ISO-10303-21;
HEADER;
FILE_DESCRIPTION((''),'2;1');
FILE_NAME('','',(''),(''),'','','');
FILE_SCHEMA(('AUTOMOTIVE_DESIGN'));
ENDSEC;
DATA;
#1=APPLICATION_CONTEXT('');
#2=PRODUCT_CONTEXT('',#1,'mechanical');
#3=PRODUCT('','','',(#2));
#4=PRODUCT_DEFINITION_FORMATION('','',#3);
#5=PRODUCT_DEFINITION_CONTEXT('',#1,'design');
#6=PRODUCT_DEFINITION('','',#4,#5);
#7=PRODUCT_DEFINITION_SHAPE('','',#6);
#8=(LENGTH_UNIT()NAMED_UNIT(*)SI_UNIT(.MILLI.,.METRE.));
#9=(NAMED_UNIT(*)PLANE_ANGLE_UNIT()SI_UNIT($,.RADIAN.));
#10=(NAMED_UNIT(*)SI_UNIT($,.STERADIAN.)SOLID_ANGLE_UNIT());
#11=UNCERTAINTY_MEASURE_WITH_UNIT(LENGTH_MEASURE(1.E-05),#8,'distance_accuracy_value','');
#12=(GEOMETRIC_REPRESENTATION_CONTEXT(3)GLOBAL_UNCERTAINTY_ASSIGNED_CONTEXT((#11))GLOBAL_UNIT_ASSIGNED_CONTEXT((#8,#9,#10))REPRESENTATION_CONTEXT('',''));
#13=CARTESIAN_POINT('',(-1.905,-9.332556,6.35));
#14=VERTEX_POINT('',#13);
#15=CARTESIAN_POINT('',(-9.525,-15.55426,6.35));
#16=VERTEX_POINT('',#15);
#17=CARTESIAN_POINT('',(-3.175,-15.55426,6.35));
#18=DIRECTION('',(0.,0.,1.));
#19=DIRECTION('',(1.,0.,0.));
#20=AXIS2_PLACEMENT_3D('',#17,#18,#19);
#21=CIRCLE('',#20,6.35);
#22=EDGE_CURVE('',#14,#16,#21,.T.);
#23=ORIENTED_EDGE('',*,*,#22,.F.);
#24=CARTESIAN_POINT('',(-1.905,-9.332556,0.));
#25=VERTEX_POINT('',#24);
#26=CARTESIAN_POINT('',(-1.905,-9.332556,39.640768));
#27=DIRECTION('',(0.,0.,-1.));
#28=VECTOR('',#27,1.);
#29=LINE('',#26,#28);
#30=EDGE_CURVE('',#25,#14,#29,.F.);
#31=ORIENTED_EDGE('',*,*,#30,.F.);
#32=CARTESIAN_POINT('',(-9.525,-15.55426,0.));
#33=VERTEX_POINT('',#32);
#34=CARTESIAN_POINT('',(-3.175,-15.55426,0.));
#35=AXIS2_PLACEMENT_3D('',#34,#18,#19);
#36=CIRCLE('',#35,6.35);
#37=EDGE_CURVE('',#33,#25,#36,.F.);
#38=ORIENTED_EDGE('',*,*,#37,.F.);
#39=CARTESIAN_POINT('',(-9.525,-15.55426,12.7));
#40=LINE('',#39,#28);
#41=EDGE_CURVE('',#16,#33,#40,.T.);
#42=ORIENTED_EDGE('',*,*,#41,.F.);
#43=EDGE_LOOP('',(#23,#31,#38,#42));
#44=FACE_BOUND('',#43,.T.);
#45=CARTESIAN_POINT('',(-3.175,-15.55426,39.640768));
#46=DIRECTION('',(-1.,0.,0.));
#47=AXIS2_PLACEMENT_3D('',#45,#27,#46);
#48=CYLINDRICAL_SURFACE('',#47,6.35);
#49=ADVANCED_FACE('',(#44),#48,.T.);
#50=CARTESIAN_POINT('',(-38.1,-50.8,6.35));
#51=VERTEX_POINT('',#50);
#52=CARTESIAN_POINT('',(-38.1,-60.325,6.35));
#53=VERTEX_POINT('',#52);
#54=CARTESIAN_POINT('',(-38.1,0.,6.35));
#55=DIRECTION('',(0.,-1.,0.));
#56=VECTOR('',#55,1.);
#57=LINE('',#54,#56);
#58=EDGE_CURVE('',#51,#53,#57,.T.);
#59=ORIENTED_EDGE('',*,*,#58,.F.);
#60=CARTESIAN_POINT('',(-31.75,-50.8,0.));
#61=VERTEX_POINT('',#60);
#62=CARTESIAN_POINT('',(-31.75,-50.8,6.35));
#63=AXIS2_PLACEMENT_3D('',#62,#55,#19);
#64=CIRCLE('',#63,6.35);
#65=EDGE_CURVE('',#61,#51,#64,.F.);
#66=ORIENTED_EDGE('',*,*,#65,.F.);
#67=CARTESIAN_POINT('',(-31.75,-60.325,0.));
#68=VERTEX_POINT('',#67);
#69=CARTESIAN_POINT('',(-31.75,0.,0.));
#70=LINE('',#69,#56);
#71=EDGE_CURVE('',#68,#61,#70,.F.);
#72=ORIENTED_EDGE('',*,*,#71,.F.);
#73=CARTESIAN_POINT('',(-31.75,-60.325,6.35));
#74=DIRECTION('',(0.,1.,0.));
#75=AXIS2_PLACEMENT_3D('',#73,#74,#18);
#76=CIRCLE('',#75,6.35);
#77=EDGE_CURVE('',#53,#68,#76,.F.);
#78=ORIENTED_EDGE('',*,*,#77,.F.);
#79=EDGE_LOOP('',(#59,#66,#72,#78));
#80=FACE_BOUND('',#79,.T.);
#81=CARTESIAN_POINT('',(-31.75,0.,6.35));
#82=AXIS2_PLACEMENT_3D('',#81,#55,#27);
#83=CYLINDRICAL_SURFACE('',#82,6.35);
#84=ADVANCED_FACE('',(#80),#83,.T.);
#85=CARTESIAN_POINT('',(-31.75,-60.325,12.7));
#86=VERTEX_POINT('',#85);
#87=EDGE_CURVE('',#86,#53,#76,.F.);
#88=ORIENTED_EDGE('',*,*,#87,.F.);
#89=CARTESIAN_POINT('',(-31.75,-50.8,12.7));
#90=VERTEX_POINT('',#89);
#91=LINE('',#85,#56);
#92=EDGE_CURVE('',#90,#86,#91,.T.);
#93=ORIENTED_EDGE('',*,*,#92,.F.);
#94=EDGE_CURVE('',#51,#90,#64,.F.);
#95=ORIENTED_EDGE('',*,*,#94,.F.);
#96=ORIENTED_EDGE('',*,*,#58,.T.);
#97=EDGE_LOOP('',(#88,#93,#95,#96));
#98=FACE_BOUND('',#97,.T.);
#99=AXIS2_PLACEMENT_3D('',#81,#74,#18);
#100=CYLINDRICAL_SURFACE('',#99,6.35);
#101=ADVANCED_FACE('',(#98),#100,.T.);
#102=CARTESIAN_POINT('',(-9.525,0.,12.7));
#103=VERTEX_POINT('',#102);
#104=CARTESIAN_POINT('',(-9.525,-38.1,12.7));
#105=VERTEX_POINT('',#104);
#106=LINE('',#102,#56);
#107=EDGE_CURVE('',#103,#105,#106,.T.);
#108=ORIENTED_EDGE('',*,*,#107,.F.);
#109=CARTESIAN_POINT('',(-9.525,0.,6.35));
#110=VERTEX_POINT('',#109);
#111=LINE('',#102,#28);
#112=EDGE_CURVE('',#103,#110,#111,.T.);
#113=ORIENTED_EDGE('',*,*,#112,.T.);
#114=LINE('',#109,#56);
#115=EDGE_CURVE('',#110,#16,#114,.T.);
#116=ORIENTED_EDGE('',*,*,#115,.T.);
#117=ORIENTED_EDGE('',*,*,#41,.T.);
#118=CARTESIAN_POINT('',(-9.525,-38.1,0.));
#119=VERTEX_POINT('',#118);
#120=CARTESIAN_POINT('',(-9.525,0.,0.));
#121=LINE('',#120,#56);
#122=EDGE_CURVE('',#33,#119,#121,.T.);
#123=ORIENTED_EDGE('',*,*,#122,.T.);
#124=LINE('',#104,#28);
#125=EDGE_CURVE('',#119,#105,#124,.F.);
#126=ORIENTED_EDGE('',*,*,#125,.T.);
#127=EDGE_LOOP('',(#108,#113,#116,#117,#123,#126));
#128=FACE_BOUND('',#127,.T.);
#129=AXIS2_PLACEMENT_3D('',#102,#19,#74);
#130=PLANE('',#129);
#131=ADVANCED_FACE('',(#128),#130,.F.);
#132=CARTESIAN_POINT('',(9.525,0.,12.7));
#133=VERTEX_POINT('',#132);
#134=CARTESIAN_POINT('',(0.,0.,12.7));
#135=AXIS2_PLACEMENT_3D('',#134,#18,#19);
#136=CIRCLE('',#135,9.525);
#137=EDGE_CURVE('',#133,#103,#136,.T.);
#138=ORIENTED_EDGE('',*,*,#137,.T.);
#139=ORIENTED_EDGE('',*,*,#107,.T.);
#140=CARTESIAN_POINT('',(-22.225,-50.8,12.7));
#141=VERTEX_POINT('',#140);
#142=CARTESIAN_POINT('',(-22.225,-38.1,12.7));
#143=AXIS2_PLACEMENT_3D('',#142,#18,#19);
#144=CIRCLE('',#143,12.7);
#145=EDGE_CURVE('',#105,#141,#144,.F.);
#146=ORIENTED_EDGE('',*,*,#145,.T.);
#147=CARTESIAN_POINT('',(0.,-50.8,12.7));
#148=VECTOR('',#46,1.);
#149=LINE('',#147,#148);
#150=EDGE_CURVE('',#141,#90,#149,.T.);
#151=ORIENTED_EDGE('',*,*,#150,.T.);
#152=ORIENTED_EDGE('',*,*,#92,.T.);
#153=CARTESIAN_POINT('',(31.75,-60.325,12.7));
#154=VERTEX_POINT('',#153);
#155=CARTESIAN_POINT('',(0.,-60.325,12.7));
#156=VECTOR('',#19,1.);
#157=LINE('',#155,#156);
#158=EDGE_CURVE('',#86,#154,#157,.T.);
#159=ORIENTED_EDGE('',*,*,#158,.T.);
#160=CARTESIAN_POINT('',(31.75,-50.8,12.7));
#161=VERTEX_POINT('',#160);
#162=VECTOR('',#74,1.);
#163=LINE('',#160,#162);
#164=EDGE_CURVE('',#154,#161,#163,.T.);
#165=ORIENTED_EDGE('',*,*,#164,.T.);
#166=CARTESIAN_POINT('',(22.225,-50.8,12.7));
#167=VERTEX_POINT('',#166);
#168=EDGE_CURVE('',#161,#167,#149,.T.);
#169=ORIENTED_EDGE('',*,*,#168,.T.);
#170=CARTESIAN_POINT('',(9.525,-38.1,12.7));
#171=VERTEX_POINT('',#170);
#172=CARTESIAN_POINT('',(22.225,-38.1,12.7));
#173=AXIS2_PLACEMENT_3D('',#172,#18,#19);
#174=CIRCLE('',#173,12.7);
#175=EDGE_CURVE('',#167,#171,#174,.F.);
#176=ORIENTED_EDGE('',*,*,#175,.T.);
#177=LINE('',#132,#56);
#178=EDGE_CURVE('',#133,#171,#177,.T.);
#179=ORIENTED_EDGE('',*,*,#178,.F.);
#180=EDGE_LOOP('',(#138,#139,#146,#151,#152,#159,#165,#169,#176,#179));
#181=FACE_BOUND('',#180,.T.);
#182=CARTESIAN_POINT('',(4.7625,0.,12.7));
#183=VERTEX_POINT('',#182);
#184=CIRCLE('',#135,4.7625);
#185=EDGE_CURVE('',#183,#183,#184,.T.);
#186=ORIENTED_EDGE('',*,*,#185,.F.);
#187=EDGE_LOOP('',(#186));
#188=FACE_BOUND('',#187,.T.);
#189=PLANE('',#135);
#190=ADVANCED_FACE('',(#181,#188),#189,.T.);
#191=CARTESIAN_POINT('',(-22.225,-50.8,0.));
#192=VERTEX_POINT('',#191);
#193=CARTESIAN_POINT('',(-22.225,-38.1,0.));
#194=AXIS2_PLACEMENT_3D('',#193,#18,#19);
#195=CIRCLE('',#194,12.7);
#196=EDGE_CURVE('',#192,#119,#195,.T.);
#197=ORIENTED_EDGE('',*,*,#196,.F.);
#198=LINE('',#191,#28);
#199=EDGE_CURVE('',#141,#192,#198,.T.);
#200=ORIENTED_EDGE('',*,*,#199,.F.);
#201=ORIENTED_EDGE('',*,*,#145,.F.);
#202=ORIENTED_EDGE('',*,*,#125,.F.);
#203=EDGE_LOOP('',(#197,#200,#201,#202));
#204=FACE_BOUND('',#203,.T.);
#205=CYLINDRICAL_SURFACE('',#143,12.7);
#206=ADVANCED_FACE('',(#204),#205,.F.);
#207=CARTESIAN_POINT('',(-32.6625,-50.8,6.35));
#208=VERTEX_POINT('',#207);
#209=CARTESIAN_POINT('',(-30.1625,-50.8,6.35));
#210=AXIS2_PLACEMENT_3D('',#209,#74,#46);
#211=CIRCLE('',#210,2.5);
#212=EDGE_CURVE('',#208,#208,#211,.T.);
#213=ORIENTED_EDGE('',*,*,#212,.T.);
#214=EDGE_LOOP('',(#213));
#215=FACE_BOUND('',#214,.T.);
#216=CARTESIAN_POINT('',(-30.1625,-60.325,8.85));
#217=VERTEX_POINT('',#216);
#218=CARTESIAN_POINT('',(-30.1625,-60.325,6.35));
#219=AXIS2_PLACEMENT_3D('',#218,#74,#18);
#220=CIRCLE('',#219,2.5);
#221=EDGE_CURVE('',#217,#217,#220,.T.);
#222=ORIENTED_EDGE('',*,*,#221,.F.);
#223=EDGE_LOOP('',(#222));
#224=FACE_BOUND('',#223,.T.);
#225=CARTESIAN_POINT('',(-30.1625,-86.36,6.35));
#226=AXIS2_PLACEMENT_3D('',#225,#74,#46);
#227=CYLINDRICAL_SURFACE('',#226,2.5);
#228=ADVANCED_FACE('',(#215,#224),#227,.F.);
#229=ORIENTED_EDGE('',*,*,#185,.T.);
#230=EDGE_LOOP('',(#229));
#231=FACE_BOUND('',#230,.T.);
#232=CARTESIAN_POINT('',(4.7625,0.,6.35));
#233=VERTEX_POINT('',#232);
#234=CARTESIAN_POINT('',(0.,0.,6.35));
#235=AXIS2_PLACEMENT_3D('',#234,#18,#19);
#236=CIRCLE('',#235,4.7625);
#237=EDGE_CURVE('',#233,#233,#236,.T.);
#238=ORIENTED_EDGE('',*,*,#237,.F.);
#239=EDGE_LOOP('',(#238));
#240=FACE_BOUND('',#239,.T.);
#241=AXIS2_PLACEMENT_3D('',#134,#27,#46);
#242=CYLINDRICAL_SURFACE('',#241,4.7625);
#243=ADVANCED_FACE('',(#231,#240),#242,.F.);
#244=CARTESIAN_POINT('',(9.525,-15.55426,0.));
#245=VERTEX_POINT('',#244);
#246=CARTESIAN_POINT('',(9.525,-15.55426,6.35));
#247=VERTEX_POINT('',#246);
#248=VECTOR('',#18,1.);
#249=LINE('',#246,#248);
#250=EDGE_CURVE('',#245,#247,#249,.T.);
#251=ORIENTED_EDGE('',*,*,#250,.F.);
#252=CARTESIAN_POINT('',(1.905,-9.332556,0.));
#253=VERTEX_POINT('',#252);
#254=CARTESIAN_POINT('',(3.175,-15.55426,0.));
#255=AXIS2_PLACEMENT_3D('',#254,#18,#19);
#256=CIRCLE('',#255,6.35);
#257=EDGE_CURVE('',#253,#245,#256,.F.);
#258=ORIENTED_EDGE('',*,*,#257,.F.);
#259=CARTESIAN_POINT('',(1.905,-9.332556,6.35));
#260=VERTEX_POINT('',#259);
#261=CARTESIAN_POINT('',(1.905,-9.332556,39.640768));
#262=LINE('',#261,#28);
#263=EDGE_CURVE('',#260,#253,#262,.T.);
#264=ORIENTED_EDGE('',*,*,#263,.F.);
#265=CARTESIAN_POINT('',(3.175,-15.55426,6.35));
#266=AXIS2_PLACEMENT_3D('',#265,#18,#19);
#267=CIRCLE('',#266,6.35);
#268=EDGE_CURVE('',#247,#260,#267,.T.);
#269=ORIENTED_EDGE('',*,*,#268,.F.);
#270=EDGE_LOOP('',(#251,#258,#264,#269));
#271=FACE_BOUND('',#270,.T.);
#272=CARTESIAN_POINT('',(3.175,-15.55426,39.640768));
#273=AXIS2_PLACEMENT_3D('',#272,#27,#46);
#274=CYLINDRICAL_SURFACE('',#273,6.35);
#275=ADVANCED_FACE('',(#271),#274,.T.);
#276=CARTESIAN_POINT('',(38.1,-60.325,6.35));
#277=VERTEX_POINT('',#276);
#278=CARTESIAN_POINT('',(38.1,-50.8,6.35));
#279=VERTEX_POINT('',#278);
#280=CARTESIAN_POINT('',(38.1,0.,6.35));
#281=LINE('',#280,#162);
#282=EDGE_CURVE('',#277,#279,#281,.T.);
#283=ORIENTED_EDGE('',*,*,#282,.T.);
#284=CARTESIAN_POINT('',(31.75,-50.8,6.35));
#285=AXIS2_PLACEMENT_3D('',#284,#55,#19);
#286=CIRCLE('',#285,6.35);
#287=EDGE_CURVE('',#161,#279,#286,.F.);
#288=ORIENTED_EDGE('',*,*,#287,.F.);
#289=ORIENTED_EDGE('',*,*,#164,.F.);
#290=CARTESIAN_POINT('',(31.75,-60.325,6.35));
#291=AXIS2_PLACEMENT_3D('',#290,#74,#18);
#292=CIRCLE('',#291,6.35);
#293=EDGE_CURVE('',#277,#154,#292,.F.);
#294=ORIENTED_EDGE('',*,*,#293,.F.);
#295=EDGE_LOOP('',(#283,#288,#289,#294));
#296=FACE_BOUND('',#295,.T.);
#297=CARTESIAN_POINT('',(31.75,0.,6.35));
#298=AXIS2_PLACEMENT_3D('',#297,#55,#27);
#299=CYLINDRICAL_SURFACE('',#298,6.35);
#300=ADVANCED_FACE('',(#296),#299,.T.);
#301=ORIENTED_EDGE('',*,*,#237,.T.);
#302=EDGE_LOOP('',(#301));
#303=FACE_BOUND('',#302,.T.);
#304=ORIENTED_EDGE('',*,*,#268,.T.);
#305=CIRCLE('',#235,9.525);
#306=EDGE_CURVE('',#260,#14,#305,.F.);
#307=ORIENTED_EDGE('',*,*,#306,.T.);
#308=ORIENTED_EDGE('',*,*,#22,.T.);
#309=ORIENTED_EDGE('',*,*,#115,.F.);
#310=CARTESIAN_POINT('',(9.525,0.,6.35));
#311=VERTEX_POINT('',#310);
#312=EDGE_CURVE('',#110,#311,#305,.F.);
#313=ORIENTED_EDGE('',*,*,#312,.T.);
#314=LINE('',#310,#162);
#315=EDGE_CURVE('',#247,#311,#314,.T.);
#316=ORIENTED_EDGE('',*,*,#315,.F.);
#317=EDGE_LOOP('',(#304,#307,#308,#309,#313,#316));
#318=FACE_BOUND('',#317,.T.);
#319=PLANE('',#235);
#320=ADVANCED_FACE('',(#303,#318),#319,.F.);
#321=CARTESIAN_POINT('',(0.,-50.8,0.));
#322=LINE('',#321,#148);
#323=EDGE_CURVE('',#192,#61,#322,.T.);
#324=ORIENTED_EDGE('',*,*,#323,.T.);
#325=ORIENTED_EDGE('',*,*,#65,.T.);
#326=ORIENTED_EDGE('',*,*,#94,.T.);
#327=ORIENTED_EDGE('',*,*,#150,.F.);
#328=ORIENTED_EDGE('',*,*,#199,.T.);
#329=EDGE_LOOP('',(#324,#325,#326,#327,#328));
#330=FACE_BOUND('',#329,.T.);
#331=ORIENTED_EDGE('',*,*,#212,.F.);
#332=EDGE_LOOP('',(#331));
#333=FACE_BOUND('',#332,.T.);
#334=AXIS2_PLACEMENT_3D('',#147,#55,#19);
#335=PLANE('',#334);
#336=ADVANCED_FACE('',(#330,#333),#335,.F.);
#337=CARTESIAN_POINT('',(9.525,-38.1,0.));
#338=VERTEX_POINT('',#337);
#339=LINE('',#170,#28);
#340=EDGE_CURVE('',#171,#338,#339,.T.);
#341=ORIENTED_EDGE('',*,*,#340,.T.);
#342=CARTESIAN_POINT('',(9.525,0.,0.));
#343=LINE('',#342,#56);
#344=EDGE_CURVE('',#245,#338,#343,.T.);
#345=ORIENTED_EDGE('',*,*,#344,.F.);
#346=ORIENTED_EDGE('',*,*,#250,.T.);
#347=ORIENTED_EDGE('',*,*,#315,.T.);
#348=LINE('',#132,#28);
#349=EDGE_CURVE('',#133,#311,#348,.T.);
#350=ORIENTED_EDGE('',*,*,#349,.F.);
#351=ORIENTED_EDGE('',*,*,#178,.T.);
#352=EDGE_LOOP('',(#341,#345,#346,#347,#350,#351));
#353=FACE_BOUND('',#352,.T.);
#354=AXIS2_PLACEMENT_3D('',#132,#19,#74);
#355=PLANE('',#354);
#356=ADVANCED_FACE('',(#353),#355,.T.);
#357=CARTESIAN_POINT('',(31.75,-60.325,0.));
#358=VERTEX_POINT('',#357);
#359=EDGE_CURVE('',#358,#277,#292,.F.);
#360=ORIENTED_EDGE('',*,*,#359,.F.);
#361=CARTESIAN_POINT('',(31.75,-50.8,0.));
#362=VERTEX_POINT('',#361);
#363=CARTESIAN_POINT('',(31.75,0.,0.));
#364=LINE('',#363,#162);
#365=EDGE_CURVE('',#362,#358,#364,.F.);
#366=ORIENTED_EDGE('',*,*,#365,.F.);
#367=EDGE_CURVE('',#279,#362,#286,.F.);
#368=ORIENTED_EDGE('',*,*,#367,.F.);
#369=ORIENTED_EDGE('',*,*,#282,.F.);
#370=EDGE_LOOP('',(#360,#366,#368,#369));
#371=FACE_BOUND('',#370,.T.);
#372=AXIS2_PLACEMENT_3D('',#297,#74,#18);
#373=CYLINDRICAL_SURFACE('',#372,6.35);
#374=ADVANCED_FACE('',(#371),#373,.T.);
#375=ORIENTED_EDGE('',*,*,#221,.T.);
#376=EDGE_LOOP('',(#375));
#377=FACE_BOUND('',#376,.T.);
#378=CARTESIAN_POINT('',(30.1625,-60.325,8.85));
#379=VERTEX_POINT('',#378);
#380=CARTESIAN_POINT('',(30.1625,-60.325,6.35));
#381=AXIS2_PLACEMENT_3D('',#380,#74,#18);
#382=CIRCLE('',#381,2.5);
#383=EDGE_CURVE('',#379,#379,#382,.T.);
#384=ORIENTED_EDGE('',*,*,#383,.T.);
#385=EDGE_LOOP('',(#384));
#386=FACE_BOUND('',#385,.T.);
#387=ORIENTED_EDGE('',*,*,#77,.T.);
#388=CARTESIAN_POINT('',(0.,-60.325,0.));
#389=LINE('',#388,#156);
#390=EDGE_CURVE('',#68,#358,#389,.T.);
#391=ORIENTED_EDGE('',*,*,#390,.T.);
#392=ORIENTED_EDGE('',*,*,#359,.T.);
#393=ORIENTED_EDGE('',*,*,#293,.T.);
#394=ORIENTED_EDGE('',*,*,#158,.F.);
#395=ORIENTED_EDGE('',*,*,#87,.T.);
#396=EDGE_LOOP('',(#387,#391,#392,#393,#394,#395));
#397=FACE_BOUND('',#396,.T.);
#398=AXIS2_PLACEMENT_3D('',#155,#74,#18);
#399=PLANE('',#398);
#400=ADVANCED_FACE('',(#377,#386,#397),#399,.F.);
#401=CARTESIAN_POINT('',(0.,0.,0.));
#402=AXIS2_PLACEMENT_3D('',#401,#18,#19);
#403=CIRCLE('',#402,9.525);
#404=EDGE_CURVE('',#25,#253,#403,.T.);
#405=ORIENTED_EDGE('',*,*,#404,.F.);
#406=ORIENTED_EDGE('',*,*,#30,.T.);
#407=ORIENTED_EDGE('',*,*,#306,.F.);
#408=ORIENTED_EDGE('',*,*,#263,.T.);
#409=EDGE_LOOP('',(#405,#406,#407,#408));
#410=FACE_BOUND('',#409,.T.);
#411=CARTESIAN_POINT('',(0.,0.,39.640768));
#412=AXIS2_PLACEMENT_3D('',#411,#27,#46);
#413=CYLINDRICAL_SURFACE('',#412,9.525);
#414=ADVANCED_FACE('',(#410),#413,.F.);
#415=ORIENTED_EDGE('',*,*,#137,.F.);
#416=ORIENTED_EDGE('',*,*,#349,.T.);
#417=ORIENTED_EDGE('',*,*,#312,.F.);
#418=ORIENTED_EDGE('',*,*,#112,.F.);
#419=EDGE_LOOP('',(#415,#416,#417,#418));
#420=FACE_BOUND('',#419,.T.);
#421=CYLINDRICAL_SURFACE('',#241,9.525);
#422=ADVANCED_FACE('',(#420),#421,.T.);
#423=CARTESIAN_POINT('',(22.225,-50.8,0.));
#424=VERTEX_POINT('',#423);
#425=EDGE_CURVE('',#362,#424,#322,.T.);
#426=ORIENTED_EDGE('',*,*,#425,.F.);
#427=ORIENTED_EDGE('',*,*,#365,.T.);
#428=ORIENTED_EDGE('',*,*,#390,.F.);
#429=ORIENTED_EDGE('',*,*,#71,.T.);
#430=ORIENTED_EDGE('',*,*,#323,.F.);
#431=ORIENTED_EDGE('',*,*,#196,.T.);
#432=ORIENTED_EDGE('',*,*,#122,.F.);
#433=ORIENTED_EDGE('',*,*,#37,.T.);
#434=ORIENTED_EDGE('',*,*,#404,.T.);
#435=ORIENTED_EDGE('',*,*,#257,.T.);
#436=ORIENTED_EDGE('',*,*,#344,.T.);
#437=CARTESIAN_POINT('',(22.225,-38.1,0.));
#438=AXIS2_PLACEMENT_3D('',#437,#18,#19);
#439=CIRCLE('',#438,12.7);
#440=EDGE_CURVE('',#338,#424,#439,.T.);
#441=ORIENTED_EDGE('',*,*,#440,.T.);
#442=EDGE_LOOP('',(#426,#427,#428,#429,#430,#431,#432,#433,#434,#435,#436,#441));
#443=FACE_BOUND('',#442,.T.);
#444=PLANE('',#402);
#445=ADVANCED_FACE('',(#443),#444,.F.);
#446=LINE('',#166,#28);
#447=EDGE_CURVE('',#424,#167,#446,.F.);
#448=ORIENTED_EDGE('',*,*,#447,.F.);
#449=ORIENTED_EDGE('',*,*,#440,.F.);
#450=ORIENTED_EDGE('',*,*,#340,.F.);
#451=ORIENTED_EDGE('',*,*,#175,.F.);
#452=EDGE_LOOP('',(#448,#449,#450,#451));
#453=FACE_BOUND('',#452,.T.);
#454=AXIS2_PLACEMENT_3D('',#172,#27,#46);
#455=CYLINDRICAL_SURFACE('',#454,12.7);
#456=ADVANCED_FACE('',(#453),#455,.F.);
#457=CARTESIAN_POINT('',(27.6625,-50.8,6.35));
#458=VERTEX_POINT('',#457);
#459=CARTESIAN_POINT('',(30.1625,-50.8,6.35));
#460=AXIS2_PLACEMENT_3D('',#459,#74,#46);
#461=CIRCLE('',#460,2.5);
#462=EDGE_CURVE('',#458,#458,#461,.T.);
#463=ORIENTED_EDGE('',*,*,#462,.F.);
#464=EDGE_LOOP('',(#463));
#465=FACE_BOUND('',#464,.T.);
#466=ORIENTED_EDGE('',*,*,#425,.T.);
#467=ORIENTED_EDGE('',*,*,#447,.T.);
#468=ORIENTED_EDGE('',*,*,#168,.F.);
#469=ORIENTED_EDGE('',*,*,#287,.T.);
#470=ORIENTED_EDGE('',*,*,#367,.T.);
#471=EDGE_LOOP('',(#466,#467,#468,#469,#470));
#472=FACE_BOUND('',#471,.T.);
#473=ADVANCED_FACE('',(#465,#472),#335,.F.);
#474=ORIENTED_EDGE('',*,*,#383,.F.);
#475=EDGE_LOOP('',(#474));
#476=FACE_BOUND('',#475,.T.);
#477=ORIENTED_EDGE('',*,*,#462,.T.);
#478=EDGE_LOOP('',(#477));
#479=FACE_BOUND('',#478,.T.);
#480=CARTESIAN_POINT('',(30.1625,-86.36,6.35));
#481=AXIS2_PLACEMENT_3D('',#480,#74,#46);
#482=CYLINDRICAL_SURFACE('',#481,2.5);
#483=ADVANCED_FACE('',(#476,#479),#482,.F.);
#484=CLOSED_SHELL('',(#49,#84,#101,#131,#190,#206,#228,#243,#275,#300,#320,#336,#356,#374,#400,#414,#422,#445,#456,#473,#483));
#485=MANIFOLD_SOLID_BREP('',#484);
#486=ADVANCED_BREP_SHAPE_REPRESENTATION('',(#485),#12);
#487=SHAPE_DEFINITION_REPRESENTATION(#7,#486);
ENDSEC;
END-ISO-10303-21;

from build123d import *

# Parameters (mm, degrees)
SKETCH2_R           = 9.525
SKETCH2_R_2         = 4.7625
BOSS_EXTRUDE1_DEPTH = 12.7
FILLET1_R           = 12.7
SKETCH3_R           = 2.5
CUT_EXTRUDE1_DEPTH  = 35.56
FILLET2_R           = 6.35
SKETCH4_R           = 4.7625
CUT_EXTRUDE2_DEPTH  = 6.35
FILLET3_START       = -1
FILLET3_DEPTH       = 7.35


with BuildPart() as part:
    # Sketch2 → Boss-Extrude1 (new body)
    # profile 1 of 2: a face of its own
    with BuildSketch(Plane.XY):
        with BuildLine():
            ThreePointArc((9.525, 0), (0, -9.525), (-9.525, 0))
            Line((-9.525, 0), (-9.525, -50.8))
            Line((-9.525, -50.8), (-38.1, -50.8))
            Line((-38.1, -50.8), (-38.1, -60.325))
            Line((-38.1, -60.325), (38.1, -60.325))
            Line((38.1, -60.325), (38.1, -50.8))
            Line((38.1, -50.8), (9.525, -50.8))
            Line((9.525, -50.8), (9.525, 0))
        make_face()
    # profile 2 of 2: a face of its own
    with BuildSketch(Plane.XY):
        Circle(SKETCH2_R)
        Circle(SKETCH2_R_2, mode=Mode.SUBTRACT)
    extrude(amount=BOSS_EXTRUDE1_DEPTH)

    # Fillet1
    fillet1_edges = [part.edges().sort_by_distance(p)[0] for p in [
        (9.525, -50.8, 6.35),
        (-9.525, -50.8, 6.35),
    ]]
    fillet(fillet1_edges, radius=FILLET1_R)

    # Sketch3 → Cut-Extrude1 (cut)
    with BuildSketch(Plane(origin=(0, -50.8, 0), x_dir=(1, 0, 0), z_dir=(0, 1, 0))):
        with Locations(Location((30.1625, -6.35, 0), (0, 0, 180))):
            Circle(SKETCH3_R)
        with Locations(Location((-30.1625, -6.35, 0), (0, 0, 180))):
            Circle(SKETCH3_R)
    extrude(amount=-CUT_EXTRUDE1_DEPTH, mode=Mode.SUBTRACT)

    # Fillet2
    fillet2_edges = [part.edges().sort_by_distance(p)[0] for p in [
        (38.1, -55.5625, 0),
        (38.1, -55.5625, 12.7),
        (-38.1, -55.5625, 0),
        (-38.1, -55.5625, 12.7),
    ]]
    fillet(fillet2_edges, radius=FILLET2_R - 0.0001)  # a hair under: the kernel refuses the full size

    # Sketch4 → Cut-Extrude2 (cut)
    with BuildSketch(Plane(origin=(0, 0, 0), x_dir=(-1, 0, 0), z_dir=(0, 0, -1))):
        with BuildLine():
            ThreePointArc((-9.525, 0), (0, -9.525), (9.525, 0))
            ThreePointArc((9.525, 0), (0, 9.525), (-9.525, 0))
        make_face()
        with Locations(Location((0, 0, 0), (0, 0, 180))):
            Circle(SKETCH4_R, mode=Mode.SUBTRACT)
    extrude(amount=-CUT_EXTRUDE2_DEPTH, mode=Mode.SUBTRACT)

    # Fillet3: read off the stored shape, not the designer's step
    # Fillet3 outline → Fillet3 (cut)
    with BuildSketch(Plane.XY.offset(FILLET3_START)):
        with BuildLine():
            Line((-9.525, 0), (-9.525, -15.554259867))
            ThreePointArc((-9.525, -15.554259867), (-7.191092628, -10.635571017), (-1.905, -9.33255592))
            ThreePointArc((-1.905, -9.33255592), (-7.378033275, -6.024138943), (-9.525, 0))
        make_face()
        with BuildLine():
            ThreePointArc((9.525, 0), (7.378033275, -6.024138943), (1.905, -9.33255592))
            ThreePointArc((1.905, -9.33255592), (7.191092628, -10.635571017), (9.525, -15.554259867))
            Line((9.525, -15.554259867), (9.525, 0))
        make_face()
    extrude(amount=FILLET3_DEPTH, mode=Mode.SUBTRACT)


solid = part.part
